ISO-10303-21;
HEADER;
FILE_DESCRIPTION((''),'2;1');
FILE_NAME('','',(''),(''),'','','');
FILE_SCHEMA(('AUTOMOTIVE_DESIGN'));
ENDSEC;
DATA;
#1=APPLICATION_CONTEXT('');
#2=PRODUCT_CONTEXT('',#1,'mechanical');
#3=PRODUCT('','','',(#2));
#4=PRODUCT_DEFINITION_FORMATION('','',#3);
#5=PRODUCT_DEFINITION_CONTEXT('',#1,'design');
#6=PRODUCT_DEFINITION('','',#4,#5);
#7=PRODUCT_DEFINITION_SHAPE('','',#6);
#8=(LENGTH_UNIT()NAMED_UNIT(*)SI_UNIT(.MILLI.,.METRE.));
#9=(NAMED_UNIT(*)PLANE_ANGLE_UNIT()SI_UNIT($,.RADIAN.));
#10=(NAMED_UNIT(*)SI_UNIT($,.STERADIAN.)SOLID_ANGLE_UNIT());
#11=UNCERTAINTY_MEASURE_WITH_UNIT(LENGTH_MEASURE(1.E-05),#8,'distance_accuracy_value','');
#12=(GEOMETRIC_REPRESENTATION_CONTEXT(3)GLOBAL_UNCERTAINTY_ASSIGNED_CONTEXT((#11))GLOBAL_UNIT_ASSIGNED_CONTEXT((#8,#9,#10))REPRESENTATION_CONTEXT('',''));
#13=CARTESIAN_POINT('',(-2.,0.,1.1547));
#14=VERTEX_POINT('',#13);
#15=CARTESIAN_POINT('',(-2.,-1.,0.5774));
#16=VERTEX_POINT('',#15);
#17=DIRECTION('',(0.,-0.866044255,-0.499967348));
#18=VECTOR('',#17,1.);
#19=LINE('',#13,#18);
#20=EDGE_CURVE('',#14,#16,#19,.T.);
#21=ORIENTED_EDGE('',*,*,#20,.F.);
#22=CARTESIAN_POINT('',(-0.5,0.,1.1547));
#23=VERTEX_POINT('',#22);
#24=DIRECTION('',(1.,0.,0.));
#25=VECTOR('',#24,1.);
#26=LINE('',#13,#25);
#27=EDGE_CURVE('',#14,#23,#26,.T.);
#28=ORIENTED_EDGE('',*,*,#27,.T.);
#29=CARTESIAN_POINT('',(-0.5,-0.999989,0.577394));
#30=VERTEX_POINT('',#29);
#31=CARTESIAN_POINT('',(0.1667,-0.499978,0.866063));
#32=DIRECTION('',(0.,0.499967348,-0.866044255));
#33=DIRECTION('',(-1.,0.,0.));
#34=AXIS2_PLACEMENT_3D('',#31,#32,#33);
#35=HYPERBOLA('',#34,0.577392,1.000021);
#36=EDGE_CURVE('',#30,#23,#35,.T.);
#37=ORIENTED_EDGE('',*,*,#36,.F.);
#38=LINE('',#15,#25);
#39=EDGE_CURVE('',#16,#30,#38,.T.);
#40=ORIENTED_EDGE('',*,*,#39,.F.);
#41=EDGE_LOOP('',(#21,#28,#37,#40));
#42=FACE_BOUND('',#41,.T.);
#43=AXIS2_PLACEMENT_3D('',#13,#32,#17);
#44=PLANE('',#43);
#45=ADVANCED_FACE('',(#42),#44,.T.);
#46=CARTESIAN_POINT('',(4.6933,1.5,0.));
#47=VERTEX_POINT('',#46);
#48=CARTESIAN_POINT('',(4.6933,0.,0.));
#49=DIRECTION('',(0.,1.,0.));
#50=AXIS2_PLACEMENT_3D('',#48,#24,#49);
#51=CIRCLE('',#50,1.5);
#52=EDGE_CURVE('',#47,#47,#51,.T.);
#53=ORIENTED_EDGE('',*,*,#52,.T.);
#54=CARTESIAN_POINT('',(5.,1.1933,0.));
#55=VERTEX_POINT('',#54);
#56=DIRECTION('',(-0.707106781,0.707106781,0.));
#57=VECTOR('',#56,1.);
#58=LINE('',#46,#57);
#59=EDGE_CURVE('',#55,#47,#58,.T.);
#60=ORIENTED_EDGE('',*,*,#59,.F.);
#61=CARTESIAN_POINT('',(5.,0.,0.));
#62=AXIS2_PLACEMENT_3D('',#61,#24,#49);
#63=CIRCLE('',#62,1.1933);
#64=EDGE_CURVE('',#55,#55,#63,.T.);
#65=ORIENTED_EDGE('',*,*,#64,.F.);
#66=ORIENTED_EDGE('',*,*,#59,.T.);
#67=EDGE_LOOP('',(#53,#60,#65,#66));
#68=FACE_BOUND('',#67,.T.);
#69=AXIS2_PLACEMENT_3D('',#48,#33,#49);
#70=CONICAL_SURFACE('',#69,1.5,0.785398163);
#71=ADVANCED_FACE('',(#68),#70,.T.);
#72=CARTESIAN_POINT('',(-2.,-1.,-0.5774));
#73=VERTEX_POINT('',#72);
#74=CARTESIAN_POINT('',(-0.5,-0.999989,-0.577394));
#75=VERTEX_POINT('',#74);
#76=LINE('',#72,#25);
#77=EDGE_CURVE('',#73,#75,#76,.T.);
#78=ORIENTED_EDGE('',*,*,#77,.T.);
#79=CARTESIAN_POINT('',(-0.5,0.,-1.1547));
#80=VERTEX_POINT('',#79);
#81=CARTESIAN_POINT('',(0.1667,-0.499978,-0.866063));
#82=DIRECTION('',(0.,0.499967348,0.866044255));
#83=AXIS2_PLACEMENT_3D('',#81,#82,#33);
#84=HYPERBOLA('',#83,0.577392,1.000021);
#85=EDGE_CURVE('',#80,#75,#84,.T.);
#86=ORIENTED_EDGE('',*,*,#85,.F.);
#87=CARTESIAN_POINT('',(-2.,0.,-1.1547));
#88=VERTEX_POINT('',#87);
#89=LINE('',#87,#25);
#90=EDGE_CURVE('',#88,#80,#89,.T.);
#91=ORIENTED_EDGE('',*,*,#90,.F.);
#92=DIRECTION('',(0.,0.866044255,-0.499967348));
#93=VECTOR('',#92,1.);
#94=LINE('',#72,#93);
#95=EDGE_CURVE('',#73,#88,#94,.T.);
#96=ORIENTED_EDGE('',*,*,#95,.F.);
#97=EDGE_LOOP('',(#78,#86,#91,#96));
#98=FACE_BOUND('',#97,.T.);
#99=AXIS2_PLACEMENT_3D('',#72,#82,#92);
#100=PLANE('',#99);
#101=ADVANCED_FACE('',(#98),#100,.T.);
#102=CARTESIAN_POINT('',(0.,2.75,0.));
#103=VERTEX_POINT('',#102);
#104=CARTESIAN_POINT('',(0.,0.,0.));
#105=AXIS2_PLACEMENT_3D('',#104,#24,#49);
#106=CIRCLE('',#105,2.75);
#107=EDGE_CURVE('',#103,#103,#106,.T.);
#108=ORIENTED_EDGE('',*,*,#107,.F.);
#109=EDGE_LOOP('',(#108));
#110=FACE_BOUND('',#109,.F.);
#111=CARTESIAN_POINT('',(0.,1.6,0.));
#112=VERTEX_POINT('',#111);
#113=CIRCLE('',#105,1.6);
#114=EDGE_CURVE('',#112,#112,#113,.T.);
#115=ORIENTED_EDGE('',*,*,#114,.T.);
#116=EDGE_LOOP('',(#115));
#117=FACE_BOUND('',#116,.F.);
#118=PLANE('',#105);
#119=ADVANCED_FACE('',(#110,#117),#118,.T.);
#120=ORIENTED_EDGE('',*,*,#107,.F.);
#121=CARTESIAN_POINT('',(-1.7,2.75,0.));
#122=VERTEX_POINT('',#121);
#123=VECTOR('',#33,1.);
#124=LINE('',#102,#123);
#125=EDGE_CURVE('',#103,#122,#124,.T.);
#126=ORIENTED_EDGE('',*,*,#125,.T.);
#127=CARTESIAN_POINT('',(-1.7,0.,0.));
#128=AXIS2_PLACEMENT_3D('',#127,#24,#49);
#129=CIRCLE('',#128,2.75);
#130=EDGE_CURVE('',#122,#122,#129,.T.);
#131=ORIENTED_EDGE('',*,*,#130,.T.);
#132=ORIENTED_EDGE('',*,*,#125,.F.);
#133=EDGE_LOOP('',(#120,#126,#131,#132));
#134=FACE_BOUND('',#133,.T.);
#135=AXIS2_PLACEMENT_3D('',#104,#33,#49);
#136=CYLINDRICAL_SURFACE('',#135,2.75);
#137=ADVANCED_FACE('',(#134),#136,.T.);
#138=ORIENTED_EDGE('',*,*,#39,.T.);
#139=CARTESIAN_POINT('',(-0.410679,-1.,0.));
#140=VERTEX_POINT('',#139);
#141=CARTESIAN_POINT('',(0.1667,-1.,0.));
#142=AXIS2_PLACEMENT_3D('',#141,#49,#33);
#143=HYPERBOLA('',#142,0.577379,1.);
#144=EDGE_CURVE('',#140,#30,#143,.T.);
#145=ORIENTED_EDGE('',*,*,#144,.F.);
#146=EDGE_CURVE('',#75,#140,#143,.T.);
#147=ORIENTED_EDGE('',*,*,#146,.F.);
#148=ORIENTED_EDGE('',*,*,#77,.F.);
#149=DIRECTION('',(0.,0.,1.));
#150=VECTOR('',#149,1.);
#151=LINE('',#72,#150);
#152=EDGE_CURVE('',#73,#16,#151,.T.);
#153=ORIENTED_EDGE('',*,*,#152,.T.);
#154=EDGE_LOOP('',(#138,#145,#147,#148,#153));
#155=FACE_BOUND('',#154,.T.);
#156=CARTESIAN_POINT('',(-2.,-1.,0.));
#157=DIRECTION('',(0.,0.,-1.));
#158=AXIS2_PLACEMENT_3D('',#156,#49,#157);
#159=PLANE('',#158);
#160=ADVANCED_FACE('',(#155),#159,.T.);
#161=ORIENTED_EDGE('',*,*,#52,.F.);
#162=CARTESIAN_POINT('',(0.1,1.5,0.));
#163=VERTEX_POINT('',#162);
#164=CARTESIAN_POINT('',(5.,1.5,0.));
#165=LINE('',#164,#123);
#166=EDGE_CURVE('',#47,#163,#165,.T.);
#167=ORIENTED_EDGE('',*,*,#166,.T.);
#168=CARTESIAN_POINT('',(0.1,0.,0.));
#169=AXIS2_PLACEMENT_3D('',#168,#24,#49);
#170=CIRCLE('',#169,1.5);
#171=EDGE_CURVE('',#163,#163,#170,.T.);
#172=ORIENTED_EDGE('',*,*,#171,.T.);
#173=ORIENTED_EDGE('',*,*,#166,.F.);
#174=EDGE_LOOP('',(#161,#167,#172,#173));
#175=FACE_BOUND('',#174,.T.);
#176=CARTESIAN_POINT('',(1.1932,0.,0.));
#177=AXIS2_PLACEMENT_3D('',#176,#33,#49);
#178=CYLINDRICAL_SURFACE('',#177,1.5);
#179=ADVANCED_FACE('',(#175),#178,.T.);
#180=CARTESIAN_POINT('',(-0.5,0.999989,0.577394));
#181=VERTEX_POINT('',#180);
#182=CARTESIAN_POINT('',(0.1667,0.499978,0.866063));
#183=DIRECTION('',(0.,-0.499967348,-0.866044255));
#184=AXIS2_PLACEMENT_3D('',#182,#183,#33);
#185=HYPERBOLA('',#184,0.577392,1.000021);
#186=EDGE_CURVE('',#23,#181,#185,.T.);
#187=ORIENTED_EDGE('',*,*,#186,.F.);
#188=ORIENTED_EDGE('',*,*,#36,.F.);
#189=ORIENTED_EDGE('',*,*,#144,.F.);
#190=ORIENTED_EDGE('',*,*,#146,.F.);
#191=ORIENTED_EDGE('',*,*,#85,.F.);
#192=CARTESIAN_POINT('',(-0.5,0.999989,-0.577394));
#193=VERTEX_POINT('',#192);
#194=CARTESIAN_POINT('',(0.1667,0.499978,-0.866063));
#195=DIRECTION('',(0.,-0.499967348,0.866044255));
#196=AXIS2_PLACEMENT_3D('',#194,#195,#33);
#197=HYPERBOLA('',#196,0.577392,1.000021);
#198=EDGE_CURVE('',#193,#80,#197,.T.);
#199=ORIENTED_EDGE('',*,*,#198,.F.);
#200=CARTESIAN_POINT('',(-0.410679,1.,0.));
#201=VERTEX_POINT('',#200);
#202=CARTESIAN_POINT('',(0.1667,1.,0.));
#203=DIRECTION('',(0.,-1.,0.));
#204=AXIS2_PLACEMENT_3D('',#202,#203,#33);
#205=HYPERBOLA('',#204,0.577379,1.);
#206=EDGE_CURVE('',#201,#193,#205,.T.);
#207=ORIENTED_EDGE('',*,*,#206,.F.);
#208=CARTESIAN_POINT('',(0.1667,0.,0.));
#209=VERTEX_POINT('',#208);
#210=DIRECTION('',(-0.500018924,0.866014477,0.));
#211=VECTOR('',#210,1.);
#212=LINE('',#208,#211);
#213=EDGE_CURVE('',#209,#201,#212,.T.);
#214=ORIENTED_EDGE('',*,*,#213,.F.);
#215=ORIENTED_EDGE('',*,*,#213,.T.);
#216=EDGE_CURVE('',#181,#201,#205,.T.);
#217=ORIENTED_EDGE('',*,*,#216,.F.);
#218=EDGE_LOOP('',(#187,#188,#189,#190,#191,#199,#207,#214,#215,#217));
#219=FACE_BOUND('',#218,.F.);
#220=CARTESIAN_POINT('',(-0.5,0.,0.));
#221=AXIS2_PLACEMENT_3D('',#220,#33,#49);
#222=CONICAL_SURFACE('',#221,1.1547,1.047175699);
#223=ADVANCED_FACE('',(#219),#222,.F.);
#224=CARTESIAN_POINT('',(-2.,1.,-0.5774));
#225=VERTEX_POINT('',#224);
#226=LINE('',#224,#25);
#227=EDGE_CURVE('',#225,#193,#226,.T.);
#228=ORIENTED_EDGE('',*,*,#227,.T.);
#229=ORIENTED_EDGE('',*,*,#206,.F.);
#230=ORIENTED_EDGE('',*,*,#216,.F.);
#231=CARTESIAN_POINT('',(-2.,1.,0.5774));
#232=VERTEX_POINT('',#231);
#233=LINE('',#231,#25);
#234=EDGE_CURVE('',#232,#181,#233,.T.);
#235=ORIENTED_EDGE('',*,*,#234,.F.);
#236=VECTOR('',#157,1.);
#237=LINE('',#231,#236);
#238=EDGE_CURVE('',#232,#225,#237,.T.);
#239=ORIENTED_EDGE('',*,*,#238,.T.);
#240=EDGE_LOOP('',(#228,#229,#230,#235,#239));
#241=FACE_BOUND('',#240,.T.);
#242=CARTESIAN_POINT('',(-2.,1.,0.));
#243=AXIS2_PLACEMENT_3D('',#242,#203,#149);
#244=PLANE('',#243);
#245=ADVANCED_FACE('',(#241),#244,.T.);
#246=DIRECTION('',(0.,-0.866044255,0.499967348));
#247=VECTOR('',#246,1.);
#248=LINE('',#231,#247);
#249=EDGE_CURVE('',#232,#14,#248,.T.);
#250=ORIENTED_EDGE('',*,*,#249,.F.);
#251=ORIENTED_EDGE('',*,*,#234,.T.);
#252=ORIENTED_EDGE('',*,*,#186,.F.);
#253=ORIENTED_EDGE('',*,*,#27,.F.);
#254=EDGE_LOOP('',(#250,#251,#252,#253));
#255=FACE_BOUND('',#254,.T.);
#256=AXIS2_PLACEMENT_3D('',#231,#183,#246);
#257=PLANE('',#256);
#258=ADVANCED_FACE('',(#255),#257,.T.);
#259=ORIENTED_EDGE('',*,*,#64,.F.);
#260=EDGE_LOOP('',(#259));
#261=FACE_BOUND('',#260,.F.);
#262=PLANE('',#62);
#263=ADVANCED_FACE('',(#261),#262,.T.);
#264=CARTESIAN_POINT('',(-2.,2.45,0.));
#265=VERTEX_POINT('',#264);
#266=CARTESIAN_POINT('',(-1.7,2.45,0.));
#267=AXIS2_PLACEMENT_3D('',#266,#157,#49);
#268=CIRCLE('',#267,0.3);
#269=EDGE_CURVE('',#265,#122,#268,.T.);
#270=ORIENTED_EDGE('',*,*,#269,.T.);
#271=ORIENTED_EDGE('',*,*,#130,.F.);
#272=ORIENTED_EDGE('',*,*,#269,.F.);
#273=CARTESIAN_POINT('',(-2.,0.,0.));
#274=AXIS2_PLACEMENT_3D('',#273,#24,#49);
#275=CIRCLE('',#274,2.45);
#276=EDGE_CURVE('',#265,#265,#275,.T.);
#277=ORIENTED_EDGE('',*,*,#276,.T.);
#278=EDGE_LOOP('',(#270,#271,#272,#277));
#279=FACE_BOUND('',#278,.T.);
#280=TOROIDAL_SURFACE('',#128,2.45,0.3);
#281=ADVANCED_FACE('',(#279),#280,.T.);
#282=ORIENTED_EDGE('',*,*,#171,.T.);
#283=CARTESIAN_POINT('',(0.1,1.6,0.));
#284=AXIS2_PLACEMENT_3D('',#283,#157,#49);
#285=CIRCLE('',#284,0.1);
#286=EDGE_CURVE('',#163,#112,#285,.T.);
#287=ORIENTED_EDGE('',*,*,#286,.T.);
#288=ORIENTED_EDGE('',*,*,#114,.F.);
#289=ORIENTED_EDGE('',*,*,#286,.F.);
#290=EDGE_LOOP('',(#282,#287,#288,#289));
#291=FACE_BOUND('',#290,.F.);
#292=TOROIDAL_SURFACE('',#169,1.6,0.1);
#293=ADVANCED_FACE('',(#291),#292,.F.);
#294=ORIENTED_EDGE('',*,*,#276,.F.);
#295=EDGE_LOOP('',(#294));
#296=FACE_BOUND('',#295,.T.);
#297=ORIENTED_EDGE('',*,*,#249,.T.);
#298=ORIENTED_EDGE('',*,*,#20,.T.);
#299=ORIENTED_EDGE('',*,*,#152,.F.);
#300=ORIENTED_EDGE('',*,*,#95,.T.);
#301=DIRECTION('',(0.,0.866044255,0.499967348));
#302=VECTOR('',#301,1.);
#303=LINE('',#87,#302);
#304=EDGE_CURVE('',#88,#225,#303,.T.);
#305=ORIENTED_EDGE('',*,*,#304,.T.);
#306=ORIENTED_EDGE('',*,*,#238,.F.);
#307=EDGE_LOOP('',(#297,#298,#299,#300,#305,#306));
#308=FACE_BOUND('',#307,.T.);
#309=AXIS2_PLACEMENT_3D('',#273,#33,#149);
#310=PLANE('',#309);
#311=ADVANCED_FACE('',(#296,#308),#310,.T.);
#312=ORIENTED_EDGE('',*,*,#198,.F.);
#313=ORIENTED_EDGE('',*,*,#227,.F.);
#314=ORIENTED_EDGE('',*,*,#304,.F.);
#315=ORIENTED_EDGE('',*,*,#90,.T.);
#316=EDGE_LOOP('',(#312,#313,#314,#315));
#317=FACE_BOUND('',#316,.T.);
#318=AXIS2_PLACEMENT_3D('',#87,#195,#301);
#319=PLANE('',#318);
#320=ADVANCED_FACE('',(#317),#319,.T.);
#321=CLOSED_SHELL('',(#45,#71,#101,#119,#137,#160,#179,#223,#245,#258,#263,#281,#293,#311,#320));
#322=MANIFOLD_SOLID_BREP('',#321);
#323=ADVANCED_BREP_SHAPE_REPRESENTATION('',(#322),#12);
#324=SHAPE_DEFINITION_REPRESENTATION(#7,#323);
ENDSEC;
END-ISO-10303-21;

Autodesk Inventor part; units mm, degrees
ref_plane "YZ Plane" through (0, 0, 0) normal (1, 0, 0) x (0, 1, 0)
ref_plane "XZ Plane" through (0, 0, 0) normal (0, 1, 0) x (-1, 0, 0)
sketch "Skizze1" plane through (0, 0, 0) normal (0, 0, 1) x (1, 0, 0)
  line L0 (0.1667, 0) -> (5, 0)
  line L1 (5, 0) -> (5, 1.5)
  line L2 (5, 1.5) -> (1.5, 1.5)
  line L3 (1.5, 1.5) -> (1.1932, 1.5)
  line L4 (1.1932, 1.5) -> (0, 1.5)
  line L5 (0, 1.5) -> (0, 2.75)
  line L6 (0, 2.75) -> (-2, 2.75)
  line L7 (-2, 2.75) -> (-2, 1.1547)
  line L8 (-2, 1.1547) -> (-0.5, 1.1547)
  line L9 (-0.5, 1.1547) -> (0.1667, 0)
  line L10 (-3.4, 0) -> (6.4, 0) projected
  line L11 (0, -0.55) -> (0, 3.3) projected
  line L12 (1.5, 1.5) -> (0, 1.5) construction
  dimension "d1" = 3.5
  dimension "d2" = 0.3068
  dimension "d3" = 2
  dimension "d4" = 1.5
  dimension "d5" = 60
  dimension "d6" = 3
  dimension "d7" = 3
  dimension "d8" = 2.3094
  dimension "d9" = 5.5
  dimension "d26" = 5
revolve "Körper" add sketch "Skizze1" angle 360 about axis through (0.1667, 0, 0) along (1, 0, 0) contours L9 L11 L4 L3 L2 L1 L0 | L9 L8 L7 L6 L5 L11
sketch "Skizze2" plane through (-2, 0, 0) normal (-1, 0, 0) x (0, 0, 1)
  circle A0 centre (0, 0) radius 1.1547 projected
  line L0 (0, -3.85) -> (0, 3.85) projected
  line L1 (-3.85, 0) -> (3.85, 0) projected
  line L2 (1.1547, 0) -> (0.5774, -1)
  line L3 (0.5774, -1) -> (-0.5774, -1)
  line L4 (-0.5774, -1) -> (-1.1547, 0)
  line L5 (-1.1547, 0) -> (-0.5774, 1)
  line L6 (-0.5774, 1) -> (0.5774, 1)
  line L7 (0.5774, 1) -> (1.1547, 0)
extrude "Loch" add sketch "Skizze2" against normal up to next contours L7 A0 | A0 L2 | L6 L0 A0 | A0 L0 L3 | L0 L6 A0 | A0 L3 L0 | L4 A0 | A0 L5
fillet "Rundung1" radius 0.3 1 edges at (-2, -2.75, 0)
thread "Gewinde" size "M3x0.5" class "6g" standard "ISO Metric profile" length 3.5
chamfer "Fase1" distance 0.3067 distance2 0.3067 1 edges at (5, -1.5, 0) measured on face at (5, -0.2617, -0.7882)
ref_plane "Work Plane1" through (29, 0, 0) normal (0, -1, 0) x (1, 0, 0)
fillet "Fillet2" radius 0.1 1 edges at (0, -1.5, 0)
equation "\"d30\" = R"
equation "\"d15\" = -0.5 * SPD + 0.5 * GD"
equation "\"d16\" = GUL"
equation "\"d17\" = RR"
equation "\"d13\" = GEL"
equation "\"d1\" = GEL"
equation "\"d3\" = KOH"
equation "\"d4\" = INTI"
equation "\"d6\" = GD"
equation "\"d7\" = BDM"
equation "\"d8\" = 1.1547 * SW"
equation "\"d9\" = KOD"
equation "\"d26\" = NLG"
equation "\"GD\" = NND"
equation "\"NLG\" = 5"
equation "\"GEL\" = 3.5"
equation "\"KOD\" = 5.5"
equation "\"KOH\" = 2"
equation "\"INTI\" = 1.5"
equation "\"GAL\" = 0.61345 * PTC"
equation "\"GUL\" = 0.61345 * PTC"
equation "\"BDM\" = NND"
equation "\"SW\" = 2"
equation "\"RR\" = 0.3"
equation "\"SPD\" = NND - 1.2269 * PTC"
equation "\"R\" = 0.1"
equation "\"TOA\" = 30deg"
equation "\"GD1\" = THREADDIA - 1.2269 * PTC"
equation "\"THREADDIA\" = 3"
equation "\"FAWI\" = 45deg"
equation "\"ANG\" = 120deg"
equation "\"PTC\" = 0.5"
equation "\"NND\" = 3"
equation "\"E0\" = 1.155 * SW"
properties part number "DIN 7984 - M3 x 5" material "Stahl, weich"
